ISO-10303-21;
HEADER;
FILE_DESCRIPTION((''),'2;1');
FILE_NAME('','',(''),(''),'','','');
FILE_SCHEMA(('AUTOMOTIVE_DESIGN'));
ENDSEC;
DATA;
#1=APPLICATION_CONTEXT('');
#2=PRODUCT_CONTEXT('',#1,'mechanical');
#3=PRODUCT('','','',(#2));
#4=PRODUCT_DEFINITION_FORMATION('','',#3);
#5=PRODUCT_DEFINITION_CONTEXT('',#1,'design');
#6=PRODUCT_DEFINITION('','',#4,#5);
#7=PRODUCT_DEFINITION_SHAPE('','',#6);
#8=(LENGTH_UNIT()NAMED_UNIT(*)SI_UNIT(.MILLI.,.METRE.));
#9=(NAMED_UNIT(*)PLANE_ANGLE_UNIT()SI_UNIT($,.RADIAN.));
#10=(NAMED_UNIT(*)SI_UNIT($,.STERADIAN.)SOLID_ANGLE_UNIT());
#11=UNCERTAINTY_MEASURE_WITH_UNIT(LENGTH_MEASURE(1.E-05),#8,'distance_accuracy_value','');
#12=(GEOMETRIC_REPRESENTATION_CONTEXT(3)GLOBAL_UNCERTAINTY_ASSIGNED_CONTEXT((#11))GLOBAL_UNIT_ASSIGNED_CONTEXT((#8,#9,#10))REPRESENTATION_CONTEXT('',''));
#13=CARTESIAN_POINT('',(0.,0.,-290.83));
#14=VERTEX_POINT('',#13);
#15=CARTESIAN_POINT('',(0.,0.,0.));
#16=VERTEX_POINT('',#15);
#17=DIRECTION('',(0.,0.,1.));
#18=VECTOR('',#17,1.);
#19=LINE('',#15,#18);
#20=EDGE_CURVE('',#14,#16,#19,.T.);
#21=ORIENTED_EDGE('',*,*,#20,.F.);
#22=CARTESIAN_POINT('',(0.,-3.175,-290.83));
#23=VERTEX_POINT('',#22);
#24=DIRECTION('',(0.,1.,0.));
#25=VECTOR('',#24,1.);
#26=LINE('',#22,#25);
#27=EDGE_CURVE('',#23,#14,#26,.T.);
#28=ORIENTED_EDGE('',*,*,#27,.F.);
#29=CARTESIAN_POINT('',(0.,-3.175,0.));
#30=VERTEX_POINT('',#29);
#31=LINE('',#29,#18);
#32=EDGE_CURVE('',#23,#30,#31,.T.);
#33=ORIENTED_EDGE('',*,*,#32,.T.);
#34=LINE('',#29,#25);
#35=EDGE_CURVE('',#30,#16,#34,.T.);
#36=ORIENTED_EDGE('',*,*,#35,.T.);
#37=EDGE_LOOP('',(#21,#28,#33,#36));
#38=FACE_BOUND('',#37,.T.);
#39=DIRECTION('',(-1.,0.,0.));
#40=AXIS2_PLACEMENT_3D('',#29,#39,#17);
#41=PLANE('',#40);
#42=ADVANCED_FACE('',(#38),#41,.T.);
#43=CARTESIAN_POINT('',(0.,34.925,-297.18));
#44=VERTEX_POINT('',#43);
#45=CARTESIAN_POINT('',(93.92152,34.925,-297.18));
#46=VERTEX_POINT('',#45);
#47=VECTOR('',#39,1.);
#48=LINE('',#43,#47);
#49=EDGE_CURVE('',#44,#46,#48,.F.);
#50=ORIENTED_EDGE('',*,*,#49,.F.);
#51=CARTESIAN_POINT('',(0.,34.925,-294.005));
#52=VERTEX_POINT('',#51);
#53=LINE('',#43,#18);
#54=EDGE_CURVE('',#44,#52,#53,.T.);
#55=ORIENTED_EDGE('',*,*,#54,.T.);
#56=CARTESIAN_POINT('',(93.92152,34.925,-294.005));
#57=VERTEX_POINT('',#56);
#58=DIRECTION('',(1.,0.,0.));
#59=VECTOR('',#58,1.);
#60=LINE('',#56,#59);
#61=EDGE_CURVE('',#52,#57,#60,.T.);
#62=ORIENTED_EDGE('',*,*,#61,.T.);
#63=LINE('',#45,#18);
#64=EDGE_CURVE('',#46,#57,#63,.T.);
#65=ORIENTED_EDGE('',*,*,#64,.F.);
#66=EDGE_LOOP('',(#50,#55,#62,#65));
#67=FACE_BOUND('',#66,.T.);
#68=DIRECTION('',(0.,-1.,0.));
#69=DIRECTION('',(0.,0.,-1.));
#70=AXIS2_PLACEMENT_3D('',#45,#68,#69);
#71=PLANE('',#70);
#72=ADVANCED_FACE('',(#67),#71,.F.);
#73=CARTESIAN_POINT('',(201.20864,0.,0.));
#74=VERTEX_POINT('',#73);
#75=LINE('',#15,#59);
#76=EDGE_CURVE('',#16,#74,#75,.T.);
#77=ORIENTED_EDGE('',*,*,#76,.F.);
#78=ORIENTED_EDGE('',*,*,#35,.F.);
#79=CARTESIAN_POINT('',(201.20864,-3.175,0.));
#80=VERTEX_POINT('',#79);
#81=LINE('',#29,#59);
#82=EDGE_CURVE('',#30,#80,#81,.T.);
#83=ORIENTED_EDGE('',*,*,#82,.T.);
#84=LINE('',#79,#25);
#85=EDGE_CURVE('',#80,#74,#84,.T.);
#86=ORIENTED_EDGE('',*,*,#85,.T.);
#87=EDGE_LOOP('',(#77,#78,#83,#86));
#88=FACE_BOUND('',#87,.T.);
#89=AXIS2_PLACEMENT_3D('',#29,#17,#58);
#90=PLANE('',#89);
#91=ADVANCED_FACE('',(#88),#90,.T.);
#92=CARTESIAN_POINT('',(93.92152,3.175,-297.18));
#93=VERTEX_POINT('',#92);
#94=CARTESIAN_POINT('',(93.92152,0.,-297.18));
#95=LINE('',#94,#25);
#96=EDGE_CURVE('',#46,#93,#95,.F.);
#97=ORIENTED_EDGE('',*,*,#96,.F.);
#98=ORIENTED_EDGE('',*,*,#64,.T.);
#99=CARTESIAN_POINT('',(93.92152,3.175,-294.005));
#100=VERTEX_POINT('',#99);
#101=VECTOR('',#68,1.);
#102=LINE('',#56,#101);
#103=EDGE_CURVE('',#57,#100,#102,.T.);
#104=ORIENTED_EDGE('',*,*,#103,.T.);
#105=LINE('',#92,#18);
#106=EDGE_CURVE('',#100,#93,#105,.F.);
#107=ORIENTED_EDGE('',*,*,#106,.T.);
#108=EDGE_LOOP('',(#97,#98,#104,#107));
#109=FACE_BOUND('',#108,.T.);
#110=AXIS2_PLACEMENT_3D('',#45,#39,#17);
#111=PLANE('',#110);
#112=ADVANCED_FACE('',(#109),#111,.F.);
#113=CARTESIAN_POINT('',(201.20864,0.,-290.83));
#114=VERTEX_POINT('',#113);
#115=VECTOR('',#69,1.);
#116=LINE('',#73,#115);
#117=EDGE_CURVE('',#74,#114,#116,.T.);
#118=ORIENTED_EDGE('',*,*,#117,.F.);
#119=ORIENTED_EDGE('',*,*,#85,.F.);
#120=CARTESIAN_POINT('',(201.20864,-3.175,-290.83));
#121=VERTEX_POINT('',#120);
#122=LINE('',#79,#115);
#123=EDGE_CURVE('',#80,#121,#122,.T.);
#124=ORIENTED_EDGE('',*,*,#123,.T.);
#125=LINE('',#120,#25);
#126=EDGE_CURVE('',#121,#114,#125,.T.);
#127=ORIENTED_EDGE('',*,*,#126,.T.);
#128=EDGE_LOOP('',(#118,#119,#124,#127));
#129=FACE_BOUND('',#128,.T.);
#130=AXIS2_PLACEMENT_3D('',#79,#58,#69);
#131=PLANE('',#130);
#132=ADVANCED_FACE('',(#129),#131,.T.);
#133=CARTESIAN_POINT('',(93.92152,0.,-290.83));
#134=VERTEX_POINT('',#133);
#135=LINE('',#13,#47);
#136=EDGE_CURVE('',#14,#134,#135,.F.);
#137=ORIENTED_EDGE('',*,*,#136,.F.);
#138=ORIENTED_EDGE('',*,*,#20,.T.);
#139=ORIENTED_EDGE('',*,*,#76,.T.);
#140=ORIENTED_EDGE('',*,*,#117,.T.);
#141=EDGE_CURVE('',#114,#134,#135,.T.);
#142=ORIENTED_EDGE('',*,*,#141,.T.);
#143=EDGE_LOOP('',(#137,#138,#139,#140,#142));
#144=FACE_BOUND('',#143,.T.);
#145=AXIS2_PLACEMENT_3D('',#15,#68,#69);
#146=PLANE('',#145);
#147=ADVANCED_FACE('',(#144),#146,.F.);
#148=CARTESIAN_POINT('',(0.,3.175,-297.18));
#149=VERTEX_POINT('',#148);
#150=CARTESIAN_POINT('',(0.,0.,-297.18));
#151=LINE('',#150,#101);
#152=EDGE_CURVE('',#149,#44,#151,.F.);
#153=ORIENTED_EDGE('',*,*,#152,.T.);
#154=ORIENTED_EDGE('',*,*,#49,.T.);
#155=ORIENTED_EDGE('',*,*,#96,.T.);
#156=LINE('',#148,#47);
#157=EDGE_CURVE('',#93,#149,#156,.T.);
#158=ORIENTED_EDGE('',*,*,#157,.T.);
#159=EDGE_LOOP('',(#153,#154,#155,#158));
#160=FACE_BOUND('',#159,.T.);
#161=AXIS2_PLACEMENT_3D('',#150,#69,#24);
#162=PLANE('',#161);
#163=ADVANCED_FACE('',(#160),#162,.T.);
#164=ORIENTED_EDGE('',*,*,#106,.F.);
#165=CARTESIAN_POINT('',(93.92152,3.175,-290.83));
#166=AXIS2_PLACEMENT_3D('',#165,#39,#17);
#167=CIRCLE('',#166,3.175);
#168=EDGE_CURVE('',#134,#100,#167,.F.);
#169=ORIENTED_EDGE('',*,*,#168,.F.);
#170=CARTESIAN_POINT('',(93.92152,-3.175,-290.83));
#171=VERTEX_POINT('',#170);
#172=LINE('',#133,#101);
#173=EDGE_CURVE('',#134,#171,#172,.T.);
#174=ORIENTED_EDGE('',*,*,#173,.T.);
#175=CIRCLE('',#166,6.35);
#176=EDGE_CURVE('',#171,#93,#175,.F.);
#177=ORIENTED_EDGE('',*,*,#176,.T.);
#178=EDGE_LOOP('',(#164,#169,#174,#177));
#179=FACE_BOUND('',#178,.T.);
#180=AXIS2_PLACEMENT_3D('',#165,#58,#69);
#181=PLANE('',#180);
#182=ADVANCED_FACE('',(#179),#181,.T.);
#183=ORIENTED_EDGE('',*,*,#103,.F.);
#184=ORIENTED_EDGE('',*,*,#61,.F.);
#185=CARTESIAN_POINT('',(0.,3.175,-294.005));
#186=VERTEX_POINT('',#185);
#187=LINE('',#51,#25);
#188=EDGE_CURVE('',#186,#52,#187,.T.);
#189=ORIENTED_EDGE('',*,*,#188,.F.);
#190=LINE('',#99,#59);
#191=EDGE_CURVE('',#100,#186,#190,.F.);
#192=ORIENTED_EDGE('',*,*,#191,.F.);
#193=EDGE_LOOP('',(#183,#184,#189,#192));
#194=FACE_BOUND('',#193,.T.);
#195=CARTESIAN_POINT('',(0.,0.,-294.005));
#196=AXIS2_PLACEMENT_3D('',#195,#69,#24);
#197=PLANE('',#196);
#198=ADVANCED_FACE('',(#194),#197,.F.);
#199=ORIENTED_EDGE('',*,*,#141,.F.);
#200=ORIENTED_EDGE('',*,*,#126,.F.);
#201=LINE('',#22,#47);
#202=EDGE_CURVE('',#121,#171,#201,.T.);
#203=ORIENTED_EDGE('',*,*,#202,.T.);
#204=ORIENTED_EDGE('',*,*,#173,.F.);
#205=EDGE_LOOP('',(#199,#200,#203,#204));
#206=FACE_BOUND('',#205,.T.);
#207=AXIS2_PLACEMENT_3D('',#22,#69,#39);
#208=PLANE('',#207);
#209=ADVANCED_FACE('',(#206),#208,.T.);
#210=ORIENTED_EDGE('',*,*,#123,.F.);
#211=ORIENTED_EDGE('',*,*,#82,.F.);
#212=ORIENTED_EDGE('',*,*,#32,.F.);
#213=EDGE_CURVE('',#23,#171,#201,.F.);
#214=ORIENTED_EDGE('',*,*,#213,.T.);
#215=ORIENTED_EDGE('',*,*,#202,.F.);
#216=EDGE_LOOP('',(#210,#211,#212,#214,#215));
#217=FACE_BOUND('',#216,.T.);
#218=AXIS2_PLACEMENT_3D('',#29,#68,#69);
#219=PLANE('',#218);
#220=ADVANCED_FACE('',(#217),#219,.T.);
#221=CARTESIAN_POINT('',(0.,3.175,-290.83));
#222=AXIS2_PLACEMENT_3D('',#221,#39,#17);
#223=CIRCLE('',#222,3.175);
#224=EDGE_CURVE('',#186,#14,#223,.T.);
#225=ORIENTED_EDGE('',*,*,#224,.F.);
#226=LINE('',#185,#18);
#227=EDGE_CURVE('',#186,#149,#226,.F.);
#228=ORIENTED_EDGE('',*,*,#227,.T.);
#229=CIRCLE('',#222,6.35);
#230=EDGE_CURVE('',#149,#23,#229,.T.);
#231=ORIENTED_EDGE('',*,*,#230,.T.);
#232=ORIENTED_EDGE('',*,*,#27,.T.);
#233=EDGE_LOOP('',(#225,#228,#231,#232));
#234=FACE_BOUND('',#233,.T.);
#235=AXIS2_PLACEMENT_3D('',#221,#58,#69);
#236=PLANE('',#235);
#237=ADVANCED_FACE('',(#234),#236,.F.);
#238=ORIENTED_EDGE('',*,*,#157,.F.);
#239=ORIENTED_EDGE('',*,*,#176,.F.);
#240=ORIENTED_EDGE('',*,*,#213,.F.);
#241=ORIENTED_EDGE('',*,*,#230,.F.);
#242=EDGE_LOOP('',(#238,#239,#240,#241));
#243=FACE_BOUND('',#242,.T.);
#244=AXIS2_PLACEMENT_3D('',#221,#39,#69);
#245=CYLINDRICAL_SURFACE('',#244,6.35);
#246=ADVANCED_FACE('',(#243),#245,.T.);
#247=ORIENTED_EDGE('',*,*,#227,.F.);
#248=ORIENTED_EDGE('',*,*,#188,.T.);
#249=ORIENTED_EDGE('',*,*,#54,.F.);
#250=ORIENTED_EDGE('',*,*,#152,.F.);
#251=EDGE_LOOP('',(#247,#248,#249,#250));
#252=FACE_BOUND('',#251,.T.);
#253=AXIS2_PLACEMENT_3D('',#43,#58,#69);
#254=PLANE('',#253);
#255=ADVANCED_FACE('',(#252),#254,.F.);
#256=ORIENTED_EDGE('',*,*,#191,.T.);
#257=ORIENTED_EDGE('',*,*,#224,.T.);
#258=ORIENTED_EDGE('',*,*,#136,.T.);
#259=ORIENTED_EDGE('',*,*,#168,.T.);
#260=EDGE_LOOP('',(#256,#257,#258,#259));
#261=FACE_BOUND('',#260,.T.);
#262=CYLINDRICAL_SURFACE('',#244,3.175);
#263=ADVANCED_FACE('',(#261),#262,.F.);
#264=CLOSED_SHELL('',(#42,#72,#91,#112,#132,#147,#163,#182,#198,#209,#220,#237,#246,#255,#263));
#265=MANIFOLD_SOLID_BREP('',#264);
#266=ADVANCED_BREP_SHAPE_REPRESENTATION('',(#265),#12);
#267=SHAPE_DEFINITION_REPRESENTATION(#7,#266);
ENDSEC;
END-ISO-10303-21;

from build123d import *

# Parameters (mm, degrees)
SKETCH1_W          = 201.20864
SKETCH1_H          = 290.83
BASE_FLANGE1_DEPTH = 3.175
EDGE_FLANGE1_DEPTH = 93.921520056


# Sheet-metal steps are written as plain solids
with BuildPart() as part:
    # Sketch1 → Base-Flange1 (new body)
    with BuildSketch(Plane(origin=(0, 0, 0), x_dir=(1, 0, 0), z_dir=(0, 1, 0))):
        with Locations((100.60432, 145.415)):
            Rectangle(SKETCH1_W, SKETCH1_H)
    extrude(amount=-BASE_FLANGE1_DEPTH)

    # Edge-Flange1 section (across the edge) → Edge-Flange1 (add)
    with BuildSketch(Plane(origin=(93.921520056, 0, -294.005), x_dir=(0, 0, 1), z_dir=(-1, 0, 0))):
        with BuildLine():
            Line((-3.175, 3.175), (-3.175, 34.925))
            Line((-3.175, 34.925), (0, 34.925))
            Line((0, 34.925), (0, 3.175))
            ThreePointArc((0, 3.175), (0.92993597, 0.92993597), (3.175, 0))
            Line((3.175, 0), (3.175, -3.175))
            ThreePointArc((3.175, -3.175), (-1.315128061, -1.315128061), (-3.175, 3.175))
        make_face()
    extrude(amount=EDGE_FLANGE1_DEPTH)


solid = part.part
